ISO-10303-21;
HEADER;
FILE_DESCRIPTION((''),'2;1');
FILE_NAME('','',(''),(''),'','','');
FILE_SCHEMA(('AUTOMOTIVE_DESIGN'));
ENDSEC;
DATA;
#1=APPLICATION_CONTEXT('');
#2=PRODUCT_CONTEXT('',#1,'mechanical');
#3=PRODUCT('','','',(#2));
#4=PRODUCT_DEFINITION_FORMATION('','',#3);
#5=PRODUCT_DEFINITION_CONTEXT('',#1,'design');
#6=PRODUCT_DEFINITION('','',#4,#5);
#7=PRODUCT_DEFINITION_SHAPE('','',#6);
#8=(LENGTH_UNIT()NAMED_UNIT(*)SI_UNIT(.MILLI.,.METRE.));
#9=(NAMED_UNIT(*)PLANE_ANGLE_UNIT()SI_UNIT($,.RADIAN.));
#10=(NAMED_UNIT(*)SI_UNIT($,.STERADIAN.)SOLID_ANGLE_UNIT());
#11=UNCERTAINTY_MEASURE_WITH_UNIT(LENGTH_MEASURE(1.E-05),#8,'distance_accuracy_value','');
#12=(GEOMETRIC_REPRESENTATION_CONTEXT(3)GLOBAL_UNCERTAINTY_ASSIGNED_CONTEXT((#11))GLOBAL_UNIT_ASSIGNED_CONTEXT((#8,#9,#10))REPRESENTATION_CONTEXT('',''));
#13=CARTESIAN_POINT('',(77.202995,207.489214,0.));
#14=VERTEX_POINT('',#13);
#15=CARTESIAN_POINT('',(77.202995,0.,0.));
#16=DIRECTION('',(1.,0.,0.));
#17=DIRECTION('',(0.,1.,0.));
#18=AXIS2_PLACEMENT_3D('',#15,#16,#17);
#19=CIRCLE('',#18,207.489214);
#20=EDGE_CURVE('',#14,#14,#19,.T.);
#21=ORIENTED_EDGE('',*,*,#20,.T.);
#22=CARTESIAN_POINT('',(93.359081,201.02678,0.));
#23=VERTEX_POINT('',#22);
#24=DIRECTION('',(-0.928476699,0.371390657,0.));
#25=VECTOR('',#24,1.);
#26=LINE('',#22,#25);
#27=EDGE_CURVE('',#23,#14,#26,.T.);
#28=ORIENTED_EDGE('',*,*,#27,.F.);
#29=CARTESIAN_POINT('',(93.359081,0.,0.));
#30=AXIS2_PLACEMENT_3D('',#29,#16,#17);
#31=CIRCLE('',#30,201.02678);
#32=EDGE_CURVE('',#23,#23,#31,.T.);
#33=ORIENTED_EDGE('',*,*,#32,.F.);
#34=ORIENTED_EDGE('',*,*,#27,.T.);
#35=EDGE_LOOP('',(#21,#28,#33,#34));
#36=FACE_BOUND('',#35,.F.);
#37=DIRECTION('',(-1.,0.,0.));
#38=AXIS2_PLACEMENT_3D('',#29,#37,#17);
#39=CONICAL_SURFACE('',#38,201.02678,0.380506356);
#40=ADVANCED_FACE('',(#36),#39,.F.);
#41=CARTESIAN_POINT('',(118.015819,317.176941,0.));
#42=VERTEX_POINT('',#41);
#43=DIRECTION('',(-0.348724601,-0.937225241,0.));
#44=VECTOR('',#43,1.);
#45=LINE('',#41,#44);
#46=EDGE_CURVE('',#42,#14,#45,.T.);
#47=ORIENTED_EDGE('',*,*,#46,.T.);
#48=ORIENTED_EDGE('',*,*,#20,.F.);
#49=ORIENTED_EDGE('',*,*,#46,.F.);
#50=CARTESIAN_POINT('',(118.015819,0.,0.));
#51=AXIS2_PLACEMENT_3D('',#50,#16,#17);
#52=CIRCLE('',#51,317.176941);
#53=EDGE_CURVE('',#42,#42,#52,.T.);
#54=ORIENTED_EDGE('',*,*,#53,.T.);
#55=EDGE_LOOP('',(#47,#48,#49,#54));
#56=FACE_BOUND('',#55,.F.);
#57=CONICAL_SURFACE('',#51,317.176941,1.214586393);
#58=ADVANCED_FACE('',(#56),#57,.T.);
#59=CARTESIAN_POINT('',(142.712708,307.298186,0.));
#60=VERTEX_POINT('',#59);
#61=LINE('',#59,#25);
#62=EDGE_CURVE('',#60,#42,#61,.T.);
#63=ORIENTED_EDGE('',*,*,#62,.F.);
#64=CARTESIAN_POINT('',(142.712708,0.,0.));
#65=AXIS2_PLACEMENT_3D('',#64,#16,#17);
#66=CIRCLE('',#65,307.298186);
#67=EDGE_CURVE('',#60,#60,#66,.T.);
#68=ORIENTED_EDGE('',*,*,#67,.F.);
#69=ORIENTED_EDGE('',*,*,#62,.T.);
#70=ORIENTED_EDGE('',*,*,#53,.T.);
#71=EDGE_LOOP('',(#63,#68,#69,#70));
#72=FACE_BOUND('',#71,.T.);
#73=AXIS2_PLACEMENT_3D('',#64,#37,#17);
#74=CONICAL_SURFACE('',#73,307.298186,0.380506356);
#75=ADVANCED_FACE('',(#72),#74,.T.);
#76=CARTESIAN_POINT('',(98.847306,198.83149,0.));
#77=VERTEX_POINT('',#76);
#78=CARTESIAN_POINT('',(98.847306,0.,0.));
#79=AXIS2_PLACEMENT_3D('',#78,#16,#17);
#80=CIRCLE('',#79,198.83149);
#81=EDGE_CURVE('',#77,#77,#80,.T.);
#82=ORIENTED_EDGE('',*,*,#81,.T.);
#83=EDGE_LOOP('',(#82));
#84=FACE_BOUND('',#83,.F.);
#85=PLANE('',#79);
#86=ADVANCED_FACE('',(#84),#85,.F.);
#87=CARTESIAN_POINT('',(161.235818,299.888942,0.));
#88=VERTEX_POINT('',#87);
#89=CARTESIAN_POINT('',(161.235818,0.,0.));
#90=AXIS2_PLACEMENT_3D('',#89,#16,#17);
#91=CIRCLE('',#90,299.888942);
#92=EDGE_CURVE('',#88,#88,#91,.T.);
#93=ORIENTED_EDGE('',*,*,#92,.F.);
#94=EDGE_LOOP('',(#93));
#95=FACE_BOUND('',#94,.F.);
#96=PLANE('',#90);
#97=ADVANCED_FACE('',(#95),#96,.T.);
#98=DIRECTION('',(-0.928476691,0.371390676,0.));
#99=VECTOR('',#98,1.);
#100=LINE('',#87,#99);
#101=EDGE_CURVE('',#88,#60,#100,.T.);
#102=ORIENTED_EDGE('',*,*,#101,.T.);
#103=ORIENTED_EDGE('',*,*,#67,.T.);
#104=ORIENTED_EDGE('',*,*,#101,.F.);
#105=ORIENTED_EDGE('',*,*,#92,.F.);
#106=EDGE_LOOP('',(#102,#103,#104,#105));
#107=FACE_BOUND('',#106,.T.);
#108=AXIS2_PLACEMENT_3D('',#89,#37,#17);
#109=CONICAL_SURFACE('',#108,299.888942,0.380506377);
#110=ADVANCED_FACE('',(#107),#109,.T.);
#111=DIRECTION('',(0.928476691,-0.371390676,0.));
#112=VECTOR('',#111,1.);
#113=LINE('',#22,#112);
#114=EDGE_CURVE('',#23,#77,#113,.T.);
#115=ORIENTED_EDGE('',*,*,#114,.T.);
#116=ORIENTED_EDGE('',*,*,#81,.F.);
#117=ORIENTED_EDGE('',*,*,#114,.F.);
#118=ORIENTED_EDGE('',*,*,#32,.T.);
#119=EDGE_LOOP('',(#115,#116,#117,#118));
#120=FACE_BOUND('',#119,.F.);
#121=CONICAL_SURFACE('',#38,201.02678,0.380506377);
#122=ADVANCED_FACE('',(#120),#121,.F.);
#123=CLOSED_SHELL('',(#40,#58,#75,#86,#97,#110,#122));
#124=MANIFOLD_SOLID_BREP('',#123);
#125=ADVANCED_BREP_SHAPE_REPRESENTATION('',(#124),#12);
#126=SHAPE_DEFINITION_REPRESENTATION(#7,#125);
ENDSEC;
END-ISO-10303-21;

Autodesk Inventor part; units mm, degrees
ref_plane "YZ Plane" through (0, 0, 0) normal (1, 0, 0) x (0, 1, 0)
ref_plane "XZ Plane" through (0, 0, 0) normal (0, 1, 0) x (-1, 0, 0)
ref_plane "Work Plane1" through (0, 0, -10) normal (-1, 0, 0) x (0, -1, 0)
sketch "Sketch1" plane through (0, 0, 0) normal (0, 0, 1) x (1, 0, 0)
  line L0 (-21.83974, 0) -> (131.038441, 0)
  line L1 (0, 0) -> (11.555806, 28.889516) construction
  line L2 (93.359081, 201.02678) -> (142.712708, 307.298186)
  line L3 (93.359081, 201.02678) -> (98.847306, 198.83149)
  line L4 (98.847306, 198.83149) -> (98.847306, 0)
  line L5 (142.712708, 307.298186) -> (161.235818, 299.888942)
  line L6 (161.235818, 299.888942) -> (161.235818, 0)
  dimension "delta" = 68.1986
  dimension "hxe" = 19.95
  dimension "hxi" = 5.911
  dimension "hfe" = 18.37774
  dimension "hfi" = 12.02226
  dimension "Ri" = 221.32137
  dimension "b" = 117
sketch "Sketch1 outline for Revolution1" plane through (0, 0, 0) normal (0, 0, 1) x (1, 0, 0)
  line L0 (98.847306, 198.83149) -> (98.847306, 0)
  line L1 (93.359081, 201.02678) -> (98.847306, 198.83149)
  line L2 (142.712708, 307.298186) -> (93.359081, 201.02678)
  line L3 (161.235818, 299.888942) -> (142.712708, 307.298186)
  line L4 (161.235818, 0) -> (161.235818, 299.888942)
  line L5 (98.847306, 0) -> (161.235818, 0)
revolve "Revolution1" add sketch "Sketch1 outline for Revolution1" angle 360 about axis through (-10, 0, 0) along (1, 0, 0)
sketch "Sketch2" plane through (0, 0, 0) normal (0, 0, 1) x (1, 0, 0)
  line L0 (-20.687045, 0) -> (124.12227, 0)
  line L1 (0, 0) -> (11.984241, 29.960604) construction
  line L2 (93.359081, 201.02678) -> (142.712708, 307.298186)
  line L3 (93.359081, 201.02678) -> (77.202995, 207.489214)
  line L4 (142.712708, 307.298186) -> (118.015819, 317.176941)
  line L5 (118.015819, 317.176941) -> (77.202995, 207.489214)
  dimension "hae" = 8.22162
  dimension "hai" = 5.37838
  dimension "d10" = 68.1986
revolve "Revolution2" add sketch "Sketch2" angle 360 about axis through (-10, 0, 0) along (1, 0, 0)
equation "\"delta\" = MC_delta2"
equation "\"hxe\" = MC_hxe2 + MC_hae2 - MC_h2E"
equation "\"hxi\" = MC_hxi2 + MC_hai2 - MC_h2A"
equation "\"hfe\" = MC_h2E - MC_hae2"
equation "\"hfi\" = MC_h2A - MC_hai2"
equation "\"Ri\" = MC_Ri"
equation "\"b\" = MC_b"
equation "\"hae\" = MC_hae2"
equation "\"hai\" = MC_hai2"
equation "\"d10\" = delta"
equation "\"SumDelta\" = MC_deltasum"
equation "\"MC_deltasum\" = 90deg"
equation "\"MC_b\" = 117"
equation "\"MC_Ri\" = 221.32137"
equation "\"MC_alfa\" = 20deg"
equation "\"MC_delta1\" = 21.801409deg"
equation "\"MC_hae1\" = 15.95962"
equation "\"MC_hxe1\" = 23.93975"
equation "\"MC_hai1\" = 10.44038"
equation "\"MC_hxi1\" = 11.79625"
equation "\"MC_delta2\" = 68.1986deg"
equation "\"MC_hae2\" = 8.22162"
equation "\"MC_hxe2\" = 38.32774"
equation "\"MC_hai2\" = 5.37838"
equation "\"MC_hxi2\" = 17.93326"
equation "\"MC_Ang1A\" = 203.543093deg"
equation "\"MC_Ang1B\" = 190.397416deg"
equation "\"MC_Ang1C\" = 180deg"
equation "\"MC_Ang1D\" = 171.570572deg"
equation "\"MC_Ang1E\" = 164.598698deg"
equation "\"MC_Ang2A\" = 170.582763deg"
equation "\"MC_Ang2B\" = 175.841034deg"
equation "\"MC_Ang2C\" = 180deg"
equation "\"MC_Ang2D\" = 183.371771deg"
equation "\"MC_Ang2E\" = 186.160521deg"
equation "\"MC_h1A\" = 17.40064"
equation "\"MC_h1B\" = 19.70032"
equation "\"MC_h1C\" = 22"
equation "\"MC_h1D\" = 24.29968"
equation "\"MC_h1E\" = 26.59936"
equation "\"MC_h2A\" = 17.40064"
equation "\"MC_h2B\" = 19.70032"
equation "\"MC_h2C\" = 22"
equation "\"MC_h2D\" = 24.29968"
equation "\"MC_h2E\" = 26.59936"
equation "\"MC_Rz1A\" = 82.19669"
equation "\"MC_Rz1B\" = 93.05987"
equation "\"MC_Rz1C\" = 103.92305"
equation "\"MC_Rz1D\" = 114.78623"
equation "\"MC_Rz1E\" = 125.6494"
equation "\"MC_Rz2A\" = 205.49173"
equation "\"MC_Rz2B\" = 232.64968"
equation "\"MC_Rz2C\" = 259.80762"
equation "\"MC_Rz2D\" = 286.96556"
equation "\"MC_Rz2E\" = 314.12351"
equation "\"MC_Sa1A\" = 2.90562"
equation "\"MC_Sa1B\" = 3.28962"
equation "\"MC_Sa1C\" = 3.67363"
equation "\"MC_Sa1D\" = 4.05764"
equation "\"MC_Sa1E\" = 4.44165"
equation "\"MC_Sa2A\" = 4.42236"
equation "\"MC_Sa2B\" = 5.00682"
equation "\"MC_Sa2C\" = 5.59128"
equation "\"MC_Sa2D\" = 6.17574"
equation "\"MC_Sa2E\" = 6.7602"
equation "\"MC_tx1A\" = 13.29713"
equation "\"MC_tx1B\" = 15.05449"
equation "\"MC_tx1C\" = 16.81185"
equation "\"MC_tx1D\" = 18.56921"
equation "\"MC_tx1E\" = 20.32657"
equation "\"MC_tx2A\" = 10.0867"
equation "\"MC_tx2B\" = 11.41977"
equation "\"MC_tx2C\" = 12.75284"
equation "\"MC_tx2D\" = 14.0859"
equation "\"MC_tx2E\" = 15.41897"
equation "\"MC_bD\" = 29.25"
equation "\"MC_bC\" = 58.5"
equation "\"MC_bB\" = 87.75"
equation "\"MC_bA\" = 119.34"
equation "\"MC_mx1A\" = 7.47431"
equation "\"MC_mx1B\" = 8.46212"
equation "\"MC_mx1C\" = 9.44993"
equation "\"MC_mx1D\" = 10.43775"
equation "\"MC_mx1E\" = 11.42556"
equation "\"MC_mx2A\" = 7.05073"
equation "\"MC_mx2B\" = 7.98256"
equation "\"MC_mx2C\" = 8.91439"
equation "\"MC_mx2D\" = 9.84622"
equation "\"MC_mx2E\" = 10.77805"
properties part number "bevelgear_wheel2"
